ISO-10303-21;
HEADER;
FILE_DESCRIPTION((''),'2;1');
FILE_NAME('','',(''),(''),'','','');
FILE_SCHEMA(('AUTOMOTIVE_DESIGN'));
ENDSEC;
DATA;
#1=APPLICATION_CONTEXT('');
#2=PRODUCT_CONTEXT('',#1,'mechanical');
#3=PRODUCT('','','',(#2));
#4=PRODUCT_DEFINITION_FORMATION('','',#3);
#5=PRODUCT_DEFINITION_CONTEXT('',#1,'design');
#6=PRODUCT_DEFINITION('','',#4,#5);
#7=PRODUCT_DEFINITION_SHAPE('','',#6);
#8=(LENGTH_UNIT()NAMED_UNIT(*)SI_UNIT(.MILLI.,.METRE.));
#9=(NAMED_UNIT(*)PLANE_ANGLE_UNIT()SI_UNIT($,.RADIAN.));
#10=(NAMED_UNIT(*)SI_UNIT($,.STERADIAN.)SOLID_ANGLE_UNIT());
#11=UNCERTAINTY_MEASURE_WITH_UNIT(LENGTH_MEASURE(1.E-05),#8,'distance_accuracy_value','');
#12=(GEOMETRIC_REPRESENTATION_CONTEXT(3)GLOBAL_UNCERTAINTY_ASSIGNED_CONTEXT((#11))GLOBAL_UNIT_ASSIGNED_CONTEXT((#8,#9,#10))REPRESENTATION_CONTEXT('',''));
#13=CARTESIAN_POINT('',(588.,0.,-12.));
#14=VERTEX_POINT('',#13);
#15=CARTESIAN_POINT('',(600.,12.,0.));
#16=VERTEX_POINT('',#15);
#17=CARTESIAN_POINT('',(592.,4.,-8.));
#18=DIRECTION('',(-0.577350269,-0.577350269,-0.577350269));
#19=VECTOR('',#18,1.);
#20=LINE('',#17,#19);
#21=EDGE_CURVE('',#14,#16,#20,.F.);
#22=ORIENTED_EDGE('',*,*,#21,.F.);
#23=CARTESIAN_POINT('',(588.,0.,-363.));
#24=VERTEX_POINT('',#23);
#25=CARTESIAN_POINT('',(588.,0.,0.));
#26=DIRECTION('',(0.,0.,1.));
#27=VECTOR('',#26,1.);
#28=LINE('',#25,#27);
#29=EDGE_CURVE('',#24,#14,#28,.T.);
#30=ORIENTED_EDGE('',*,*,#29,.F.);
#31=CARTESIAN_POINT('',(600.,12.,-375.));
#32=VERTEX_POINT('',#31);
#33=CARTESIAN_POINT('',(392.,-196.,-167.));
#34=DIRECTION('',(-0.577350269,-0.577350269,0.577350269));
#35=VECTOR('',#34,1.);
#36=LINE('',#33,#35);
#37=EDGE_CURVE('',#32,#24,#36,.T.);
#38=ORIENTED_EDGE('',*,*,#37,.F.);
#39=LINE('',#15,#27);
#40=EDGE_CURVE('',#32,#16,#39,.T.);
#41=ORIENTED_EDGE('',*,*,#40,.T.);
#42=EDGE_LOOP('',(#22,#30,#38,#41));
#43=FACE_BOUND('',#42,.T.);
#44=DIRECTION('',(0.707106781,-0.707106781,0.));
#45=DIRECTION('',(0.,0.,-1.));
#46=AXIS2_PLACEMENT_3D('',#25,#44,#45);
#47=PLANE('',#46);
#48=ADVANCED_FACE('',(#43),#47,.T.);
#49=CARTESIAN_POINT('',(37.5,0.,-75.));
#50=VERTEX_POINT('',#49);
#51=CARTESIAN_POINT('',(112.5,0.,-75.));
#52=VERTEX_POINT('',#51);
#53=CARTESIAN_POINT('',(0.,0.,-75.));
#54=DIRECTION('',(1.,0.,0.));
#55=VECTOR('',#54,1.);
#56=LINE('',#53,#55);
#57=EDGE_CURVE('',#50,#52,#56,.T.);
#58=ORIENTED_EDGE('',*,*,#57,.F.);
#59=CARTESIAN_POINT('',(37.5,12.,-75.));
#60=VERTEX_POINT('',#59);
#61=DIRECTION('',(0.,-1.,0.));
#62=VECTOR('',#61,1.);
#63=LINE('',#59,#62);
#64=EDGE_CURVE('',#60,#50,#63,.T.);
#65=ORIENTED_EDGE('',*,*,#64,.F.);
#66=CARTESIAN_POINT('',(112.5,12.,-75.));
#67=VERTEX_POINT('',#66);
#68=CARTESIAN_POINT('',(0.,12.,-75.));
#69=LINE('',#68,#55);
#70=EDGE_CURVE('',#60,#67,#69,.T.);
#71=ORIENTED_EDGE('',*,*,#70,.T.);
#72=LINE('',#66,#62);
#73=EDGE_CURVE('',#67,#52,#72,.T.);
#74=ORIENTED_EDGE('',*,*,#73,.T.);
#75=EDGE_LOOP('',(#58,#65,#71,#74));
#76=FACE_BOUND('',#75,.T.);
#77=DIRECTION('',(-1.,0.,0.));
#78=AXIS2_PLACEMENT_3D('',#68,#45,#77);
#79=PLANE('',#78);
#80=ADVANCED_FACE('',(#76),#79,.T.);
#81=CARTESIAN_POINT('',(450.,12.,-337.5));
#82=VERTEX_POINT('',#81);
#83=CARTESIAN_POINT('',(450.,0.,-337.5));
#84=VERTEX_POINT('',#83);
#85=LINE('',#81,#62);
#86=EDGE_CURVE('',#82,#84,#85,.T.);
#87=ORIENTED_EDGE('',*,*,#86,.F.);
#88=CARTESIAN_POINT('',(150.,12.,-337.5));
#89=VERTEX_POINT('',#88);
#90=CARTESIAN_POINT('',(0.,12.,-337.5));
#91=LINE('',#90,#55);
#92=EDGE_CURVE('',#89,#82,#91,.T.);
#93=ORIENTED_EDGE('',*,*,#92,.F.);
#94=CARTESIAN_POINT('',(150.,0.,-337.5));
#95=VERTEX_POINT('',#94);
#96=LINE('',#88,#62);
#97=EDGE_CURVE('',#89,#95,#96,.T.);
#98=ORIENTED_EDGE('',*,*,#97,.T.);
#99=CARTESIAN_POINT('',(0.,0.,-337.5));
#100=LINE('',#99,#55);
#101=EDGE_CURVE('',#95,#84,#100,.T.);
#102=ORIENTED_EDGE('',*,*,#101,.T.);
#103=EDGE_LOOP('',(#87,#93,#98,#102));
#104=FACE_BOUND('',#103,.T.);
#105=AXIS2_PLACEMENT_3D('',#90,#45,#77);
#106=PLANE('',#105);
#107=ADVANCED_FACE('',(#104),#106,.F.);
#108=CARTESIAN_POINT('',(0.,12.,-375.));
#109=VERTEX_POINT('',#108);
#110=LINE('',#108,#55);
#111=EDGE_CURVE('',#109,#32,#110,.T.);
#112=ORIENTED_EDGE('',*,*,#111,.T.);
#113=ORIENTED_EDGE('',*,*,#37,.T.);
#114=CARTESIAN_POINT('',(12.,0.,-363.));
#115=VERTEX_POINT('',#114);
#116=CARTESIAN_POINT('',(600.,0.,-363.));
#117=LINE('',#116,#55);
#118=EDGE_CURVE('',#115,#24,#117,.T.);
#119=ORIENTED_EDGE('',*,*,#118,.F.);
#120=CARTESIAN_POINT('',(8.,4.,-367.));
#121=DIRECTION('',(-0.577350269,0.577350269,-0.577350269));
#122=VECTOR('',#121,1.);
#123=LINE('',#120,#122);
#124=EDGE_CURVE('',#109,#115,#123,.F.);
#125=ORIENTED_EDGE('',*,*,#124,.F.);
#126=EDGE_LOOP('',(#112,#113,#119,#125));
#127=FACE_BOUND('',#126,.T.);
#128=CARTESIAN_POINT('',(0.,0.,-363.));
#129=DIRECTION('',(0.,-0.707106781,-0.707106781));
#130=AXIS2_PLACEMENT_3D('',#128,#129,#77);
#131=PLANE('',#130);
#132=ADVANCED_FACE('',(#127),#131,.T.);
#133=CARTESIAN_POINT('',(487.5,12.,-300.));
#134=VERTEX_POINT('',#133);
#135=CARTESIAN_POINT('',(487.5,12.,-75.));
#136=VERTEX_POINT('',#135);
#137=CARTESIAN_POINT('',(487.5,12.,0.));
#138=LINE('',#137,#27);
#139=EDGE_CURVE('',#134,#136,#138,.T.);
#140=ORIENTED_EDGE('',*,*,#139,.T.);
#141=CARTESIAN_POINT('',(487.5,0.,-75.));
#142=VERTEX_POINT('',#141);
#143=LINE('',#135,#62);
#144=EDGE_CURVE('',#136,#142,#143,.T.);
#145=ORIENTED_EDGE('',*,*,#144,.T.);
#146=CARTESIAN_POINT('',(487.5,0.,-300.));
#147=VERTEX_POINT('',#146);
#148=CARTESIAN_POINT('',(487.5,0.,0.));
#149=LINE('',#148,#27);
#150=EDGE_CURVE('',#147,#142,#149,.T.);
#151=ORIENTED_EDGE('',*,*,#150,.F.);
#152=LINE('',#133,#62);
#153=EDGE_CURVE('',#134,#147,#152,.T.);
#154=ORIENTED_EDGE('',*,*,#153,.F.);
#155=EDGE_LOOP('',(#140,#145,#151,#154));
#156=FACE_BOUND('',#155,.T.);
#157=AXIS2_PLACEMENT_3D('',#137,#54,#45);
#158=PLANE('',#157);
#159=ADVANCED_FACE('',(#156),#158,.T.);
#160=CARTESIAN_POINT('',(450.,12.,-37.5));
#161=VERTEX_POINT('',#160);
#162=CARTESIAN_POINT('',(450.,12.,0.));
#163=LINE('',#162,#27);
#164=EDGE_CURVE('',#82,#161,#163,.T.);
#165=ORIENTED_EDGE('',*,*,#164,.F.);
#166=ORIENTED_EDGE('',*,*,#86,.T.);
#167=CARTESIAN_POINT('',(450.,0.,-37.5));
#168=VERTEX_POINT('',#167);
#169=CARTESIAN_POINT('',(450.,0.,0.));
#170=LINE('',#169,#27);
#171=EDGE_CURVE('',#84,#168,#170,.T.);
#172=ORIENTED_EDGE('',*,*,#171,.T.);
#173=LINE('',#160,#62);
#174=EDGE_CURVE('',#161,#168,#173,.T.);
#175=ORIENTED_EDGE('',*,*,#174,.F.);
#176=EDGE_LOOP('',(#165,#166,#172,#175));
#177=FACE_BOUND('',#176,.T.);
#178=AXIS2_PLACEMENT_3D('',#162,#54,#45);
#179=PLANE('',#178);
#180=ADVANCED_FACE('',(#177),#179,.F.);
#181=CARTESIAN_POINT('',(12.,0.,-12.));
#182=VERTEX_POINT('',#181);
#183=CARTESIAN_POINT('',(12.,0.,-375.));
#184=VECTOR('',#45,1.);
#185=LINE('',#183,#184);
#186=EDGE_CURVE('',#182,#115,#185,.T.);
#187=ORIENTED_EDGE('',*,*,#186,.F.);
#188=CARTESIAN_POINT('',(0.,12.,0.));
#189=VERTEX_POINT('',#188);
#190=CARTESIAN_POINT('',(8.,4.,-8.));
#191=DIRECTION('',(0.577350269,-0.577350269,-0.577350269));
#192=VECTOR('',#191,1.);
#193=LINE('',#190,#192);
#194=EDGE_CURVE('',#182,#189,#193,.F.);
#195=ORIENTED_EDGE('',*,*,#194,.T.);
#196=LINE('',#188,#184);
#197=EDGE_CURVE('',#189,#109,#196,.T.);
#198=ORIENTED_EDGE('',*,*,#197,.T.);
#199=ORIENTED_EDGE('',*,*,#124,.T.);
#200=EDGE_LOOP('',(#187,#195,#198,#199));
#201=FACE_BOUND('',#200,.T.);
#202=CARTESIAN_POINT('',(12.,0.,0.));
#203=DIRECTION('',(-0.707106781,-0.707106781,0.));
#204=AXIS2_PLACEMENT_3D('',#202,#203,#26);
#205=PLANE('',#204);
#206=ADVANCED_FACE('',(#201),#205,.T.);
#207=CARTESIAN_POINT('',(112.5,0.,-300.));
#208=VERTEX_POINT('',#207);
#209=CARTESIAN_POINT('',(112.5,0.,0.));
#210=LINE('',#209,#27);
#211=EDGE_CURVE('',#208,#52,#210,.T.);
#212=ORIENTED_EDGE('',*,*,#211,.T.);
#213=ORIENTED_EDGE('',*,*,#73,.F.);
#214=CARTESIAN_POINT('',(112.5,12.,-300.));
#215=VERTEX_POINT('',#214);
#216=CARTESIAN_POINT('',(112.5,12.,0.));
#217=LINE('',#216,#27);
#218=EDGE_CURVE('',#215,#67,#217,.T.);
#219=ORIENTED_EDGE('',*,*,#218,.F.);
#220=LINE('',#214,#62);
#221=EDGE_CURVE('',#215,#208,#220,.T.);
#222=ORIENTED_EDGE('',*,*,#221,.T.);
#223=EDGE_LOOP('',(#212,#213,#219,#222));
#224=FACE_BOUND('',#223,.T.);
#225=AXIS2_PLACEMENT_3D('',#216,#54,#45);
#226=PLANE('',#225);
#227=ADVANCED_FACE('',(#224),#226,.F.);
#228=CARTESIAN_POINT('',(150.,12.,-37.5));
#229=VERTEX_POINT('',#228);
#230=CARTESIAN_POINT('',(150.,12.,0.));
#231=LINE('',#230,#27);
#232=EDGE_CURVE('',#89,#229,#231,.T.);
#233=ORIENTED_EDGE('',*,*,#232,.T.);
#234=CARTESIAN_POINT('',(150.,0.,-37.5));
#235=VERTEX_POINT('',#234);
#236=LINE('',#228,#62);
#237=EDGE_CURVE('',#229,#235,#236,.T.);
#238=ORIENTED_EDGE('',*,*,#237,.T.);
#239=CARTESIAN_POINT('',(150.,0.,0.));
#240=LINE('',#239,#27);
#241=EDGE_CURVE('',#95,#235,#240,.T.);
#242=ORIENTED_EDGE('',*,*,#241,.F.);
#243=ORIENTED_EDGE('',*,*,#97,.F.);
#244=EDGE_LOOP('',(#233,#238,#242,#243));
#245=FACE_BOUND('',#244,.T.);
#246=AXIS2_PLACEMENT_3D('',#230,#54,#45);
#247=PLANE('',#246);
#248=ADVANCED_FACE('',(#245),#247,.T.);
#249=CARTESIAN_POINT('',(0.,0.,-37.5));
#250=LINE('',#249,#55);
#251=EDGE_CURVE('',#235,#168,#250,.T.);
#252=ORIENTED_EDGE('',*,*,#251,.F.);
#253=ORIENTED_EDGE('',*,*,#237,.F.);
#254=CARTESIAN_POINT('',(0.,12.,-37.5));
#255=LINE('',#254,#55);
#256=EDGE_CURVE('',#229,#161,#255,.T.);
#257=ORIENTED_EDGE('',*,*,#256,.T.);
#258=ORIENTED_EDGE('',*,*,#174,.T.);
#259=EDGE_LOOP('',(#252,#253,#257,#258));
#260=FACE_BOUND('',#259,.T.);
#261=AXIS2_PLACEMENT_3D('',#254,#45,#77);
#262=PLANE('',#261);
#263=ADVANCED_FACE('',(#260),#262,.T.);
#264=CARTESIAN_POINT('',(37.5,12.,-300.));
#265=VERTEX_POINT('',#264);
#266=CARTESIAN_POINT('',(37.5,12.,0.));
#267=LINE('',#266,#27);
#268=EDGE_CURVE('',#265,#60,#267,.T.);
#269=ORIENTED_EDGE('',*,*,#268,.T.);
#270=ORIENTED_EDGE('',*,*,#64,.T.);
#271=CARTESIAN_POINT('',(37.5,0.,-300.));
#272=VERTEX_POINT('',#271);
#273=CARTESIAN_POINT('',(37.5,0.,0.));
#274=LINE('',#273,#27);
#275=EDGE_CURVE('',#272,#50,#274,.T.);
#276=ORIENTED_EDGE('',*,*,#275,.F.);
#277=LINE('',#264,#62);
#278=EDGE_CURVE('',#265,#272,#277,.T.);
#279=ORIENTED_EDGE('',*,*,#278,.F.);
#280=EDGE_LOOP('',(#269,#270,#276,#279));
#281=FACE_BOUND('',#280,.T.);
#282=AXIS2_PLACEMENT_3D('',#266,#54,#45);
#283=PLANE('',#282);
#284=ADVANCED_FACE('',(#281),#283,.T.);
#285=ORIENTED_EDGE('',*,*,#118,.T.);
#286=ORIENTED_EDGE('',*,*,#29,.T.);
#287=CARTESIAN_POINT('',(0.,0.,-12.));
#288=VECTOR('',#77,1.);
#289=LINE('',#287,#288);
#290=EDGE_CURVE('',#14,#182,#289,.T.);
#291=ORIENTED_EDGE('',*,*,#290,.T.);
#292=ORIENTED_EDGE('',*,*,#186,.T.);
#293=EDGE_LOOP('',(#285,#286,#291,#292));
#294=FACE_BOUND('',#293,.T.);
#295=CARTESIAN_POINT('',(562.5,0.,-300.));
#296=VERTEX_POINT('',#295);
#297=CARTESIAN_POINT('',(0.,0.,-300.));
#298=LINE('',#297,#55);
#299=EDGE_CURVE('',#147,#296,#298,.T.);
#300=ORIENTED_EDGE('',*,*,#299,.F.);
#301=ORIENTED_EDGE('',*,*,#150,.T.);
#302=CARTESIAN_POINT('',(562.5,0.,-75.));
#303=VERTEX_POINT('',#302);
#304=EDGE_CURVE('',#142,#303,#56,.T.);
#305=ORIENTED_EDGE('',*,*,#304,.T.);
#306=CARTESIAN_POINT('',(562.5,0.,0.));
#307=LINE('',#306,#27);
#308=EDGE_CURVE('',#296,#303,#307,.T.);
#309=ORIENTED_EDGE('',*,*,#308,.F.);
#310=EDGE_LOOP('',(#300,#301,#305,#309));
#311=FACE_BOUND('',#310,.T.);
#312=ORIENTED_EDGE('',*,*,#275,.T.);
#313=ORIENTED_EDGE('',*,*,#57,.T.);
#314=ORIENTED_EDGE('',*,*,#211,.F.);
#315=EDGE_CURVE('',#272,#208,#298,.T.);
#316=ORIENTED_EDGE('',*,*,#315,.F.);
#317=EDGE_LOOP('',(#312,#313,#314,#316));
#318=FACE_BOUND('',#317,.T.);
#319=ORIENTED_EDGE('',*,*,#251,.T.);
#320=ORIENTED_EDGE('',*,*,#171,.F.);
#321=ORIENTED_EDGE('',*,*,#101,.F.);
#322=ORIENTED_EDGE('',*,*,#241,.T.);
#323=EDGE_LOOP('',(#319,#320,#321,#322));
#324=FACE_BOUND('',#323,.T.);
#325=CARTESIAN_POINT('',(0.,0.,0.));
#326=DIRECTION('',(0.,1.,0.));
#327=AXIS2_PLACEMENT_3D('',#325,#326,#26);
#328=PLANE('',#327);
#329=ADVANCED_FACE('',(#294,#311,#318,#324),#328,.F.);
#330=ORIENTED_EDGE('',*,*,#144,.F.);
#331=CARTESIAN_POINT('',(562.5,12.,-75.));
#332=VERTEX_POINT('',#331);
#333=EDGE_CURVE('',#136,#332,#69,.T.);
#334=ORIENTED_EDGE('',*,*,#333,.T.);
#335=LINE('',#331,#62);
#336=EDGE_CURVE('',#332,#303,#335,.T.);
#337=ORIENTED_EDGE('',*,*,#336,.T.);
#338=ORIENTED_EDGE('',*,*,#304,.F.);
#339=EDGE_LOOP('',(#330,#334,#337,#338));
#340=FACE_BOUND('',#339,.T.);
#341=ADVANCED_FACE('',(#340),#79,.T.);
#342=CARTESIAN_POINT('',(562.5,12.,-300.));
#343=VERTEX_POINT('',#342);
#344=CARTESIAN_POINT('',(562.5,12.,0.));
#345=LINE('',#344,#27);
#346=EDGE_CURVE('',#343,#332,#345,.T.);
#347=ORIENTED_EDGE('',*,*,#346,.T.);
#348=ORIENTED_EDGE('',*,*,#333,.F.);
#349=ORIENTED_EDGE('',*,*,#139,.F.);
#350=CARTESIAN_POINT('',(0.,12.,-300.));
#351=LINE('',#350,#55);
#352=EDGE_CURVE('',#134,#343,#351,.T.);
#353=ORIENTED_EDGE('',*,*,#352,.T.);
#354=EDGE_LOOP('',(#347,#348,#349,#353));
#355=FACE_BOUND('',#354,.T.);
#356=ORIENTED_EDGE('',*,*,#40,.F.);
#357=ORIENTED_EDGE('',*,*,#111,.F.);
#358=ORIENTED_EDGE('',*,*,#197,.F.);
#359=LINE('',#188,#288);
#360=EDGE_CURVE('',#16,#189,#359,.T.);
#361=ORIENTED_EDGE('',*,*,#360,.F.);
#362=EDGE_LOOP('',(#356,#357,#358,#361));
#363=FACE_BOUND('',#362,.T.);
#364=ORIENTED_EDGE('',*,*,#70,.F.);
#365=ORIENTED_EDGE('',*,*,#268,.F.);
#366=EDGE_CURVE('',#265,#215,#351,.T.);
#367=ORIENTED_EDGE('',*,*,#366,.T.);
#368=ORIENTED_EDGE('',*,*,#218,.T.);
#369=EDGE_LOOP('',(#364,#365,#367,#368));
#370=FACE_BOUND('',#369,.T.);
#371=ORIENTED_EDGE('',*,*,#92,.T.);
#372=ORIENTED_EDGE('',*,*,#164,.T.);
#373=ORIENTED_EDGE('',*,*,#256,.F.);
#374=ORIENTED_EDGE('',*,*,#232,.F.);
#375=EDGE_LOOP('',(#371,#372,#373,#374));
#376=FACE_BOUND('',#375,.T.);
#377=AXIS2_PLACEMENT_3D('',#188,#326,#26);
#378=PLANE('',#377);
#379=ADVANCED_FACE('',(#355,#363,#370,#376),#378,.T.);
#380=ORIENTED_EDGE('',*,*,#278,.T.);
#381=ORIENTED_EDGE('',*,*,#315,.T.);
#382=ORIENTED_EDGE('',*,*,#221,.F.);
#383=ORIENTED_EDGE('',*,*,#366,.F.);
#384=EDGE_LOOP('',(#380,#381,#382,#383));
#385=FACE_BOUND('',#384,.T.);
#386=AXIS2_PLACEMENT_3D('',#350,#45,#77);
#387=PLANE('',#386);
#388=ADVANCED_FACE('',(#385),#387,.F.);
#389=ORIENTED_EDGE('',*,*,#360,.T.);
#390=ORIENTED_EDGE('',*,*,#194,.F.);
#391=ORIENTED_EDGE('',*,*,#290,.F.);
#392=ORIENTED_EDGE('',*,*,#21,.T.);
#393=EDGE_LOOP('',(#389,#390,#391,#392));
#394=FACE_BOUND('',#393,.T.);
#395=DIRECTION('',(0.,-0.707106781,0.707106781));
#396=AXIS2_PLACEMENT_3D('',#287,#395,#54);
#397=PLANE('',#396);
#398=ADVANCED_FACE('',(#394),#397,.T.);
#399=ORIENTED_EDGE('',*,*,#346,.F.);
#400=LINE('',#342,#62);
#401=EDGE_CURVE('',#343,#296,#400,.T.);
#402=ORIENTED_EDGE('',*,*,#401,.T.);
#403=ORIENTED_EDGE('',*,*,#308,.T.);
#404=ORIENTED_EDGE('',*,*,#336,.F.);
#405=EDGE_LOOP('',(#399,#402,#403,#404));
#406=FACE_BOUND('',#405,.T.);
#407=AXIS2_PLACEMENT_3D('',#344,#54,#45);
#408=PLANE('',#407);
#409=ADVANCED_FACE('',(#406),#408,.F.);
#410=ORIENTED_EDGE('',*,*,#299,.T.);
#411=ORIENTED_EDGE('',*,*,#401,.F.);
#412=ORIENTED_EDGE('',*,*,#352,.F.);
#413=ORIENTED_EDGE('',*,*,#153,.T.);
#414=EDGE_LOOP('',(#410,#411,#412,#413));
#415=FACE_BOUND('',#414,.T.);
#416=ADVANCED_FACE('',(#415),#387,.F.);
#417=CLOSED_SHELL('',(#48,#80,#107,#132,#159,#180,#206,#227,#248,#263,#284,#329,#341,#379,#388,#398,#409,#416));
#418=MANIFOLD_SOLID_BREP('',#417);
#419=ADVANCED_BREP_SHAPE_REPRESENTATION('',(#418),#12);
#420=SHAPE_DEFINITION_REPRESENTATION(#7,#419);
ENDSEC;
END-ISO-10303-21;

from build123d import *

# Parameters (mm, degrees)
SKETCH1_W           = 75
SKETCH1_H           = 225
SKETCH1_W_2         = 300
SKETCH1_H_2         = 300
BOSS_EXTRUDE1_DEPTH = 12
CHAMFER1_SIZE       = 12


with BuildPart() as part:
    # Sketch1 → Boss-Extrude1 (new body)
    with BuildSketch(Plane(origin=(0, 0, 0), x_dir=(1, 0, 0), z_dir=(0, 1, 0))):
        Polygon((0, 375), (0, 0), (600, 0), (600, 375), (375, 375), (225, 375), align=None)
        with Locations((75, 187.5)):
            Rectangle(SKETCH1_W, SKETCH1_H, mode=Mode.SUBTRACT)
        with Locations((300, 187.5)):
            Rectangle(SKETCH1_W_2, SKETCH1_H_2, mode=Mode.SUBTRACT)
        with Locations((525, 187.5)):
            Rectangle(SKETCH1_W, SKETCH1_H, mode=Mode.SUBTRACT)
    extrude(amount=BOSS_EXTRUDE1_DEPTH)

    # Chamfer1
    chamfer1_edges = [part.edges().sort_by_distance(p)[0] for p in [
        (300, 0, -375),
        (0, 0, -187.5),
        (300, 0, 0),
        (600, 0, -187.5),
    ]]
    chamfer(chamfer1_edges, length=CHAMFER1_SIZE - 0.0001)  # a hair under: the kernel refuses the full size


solid = part.part
